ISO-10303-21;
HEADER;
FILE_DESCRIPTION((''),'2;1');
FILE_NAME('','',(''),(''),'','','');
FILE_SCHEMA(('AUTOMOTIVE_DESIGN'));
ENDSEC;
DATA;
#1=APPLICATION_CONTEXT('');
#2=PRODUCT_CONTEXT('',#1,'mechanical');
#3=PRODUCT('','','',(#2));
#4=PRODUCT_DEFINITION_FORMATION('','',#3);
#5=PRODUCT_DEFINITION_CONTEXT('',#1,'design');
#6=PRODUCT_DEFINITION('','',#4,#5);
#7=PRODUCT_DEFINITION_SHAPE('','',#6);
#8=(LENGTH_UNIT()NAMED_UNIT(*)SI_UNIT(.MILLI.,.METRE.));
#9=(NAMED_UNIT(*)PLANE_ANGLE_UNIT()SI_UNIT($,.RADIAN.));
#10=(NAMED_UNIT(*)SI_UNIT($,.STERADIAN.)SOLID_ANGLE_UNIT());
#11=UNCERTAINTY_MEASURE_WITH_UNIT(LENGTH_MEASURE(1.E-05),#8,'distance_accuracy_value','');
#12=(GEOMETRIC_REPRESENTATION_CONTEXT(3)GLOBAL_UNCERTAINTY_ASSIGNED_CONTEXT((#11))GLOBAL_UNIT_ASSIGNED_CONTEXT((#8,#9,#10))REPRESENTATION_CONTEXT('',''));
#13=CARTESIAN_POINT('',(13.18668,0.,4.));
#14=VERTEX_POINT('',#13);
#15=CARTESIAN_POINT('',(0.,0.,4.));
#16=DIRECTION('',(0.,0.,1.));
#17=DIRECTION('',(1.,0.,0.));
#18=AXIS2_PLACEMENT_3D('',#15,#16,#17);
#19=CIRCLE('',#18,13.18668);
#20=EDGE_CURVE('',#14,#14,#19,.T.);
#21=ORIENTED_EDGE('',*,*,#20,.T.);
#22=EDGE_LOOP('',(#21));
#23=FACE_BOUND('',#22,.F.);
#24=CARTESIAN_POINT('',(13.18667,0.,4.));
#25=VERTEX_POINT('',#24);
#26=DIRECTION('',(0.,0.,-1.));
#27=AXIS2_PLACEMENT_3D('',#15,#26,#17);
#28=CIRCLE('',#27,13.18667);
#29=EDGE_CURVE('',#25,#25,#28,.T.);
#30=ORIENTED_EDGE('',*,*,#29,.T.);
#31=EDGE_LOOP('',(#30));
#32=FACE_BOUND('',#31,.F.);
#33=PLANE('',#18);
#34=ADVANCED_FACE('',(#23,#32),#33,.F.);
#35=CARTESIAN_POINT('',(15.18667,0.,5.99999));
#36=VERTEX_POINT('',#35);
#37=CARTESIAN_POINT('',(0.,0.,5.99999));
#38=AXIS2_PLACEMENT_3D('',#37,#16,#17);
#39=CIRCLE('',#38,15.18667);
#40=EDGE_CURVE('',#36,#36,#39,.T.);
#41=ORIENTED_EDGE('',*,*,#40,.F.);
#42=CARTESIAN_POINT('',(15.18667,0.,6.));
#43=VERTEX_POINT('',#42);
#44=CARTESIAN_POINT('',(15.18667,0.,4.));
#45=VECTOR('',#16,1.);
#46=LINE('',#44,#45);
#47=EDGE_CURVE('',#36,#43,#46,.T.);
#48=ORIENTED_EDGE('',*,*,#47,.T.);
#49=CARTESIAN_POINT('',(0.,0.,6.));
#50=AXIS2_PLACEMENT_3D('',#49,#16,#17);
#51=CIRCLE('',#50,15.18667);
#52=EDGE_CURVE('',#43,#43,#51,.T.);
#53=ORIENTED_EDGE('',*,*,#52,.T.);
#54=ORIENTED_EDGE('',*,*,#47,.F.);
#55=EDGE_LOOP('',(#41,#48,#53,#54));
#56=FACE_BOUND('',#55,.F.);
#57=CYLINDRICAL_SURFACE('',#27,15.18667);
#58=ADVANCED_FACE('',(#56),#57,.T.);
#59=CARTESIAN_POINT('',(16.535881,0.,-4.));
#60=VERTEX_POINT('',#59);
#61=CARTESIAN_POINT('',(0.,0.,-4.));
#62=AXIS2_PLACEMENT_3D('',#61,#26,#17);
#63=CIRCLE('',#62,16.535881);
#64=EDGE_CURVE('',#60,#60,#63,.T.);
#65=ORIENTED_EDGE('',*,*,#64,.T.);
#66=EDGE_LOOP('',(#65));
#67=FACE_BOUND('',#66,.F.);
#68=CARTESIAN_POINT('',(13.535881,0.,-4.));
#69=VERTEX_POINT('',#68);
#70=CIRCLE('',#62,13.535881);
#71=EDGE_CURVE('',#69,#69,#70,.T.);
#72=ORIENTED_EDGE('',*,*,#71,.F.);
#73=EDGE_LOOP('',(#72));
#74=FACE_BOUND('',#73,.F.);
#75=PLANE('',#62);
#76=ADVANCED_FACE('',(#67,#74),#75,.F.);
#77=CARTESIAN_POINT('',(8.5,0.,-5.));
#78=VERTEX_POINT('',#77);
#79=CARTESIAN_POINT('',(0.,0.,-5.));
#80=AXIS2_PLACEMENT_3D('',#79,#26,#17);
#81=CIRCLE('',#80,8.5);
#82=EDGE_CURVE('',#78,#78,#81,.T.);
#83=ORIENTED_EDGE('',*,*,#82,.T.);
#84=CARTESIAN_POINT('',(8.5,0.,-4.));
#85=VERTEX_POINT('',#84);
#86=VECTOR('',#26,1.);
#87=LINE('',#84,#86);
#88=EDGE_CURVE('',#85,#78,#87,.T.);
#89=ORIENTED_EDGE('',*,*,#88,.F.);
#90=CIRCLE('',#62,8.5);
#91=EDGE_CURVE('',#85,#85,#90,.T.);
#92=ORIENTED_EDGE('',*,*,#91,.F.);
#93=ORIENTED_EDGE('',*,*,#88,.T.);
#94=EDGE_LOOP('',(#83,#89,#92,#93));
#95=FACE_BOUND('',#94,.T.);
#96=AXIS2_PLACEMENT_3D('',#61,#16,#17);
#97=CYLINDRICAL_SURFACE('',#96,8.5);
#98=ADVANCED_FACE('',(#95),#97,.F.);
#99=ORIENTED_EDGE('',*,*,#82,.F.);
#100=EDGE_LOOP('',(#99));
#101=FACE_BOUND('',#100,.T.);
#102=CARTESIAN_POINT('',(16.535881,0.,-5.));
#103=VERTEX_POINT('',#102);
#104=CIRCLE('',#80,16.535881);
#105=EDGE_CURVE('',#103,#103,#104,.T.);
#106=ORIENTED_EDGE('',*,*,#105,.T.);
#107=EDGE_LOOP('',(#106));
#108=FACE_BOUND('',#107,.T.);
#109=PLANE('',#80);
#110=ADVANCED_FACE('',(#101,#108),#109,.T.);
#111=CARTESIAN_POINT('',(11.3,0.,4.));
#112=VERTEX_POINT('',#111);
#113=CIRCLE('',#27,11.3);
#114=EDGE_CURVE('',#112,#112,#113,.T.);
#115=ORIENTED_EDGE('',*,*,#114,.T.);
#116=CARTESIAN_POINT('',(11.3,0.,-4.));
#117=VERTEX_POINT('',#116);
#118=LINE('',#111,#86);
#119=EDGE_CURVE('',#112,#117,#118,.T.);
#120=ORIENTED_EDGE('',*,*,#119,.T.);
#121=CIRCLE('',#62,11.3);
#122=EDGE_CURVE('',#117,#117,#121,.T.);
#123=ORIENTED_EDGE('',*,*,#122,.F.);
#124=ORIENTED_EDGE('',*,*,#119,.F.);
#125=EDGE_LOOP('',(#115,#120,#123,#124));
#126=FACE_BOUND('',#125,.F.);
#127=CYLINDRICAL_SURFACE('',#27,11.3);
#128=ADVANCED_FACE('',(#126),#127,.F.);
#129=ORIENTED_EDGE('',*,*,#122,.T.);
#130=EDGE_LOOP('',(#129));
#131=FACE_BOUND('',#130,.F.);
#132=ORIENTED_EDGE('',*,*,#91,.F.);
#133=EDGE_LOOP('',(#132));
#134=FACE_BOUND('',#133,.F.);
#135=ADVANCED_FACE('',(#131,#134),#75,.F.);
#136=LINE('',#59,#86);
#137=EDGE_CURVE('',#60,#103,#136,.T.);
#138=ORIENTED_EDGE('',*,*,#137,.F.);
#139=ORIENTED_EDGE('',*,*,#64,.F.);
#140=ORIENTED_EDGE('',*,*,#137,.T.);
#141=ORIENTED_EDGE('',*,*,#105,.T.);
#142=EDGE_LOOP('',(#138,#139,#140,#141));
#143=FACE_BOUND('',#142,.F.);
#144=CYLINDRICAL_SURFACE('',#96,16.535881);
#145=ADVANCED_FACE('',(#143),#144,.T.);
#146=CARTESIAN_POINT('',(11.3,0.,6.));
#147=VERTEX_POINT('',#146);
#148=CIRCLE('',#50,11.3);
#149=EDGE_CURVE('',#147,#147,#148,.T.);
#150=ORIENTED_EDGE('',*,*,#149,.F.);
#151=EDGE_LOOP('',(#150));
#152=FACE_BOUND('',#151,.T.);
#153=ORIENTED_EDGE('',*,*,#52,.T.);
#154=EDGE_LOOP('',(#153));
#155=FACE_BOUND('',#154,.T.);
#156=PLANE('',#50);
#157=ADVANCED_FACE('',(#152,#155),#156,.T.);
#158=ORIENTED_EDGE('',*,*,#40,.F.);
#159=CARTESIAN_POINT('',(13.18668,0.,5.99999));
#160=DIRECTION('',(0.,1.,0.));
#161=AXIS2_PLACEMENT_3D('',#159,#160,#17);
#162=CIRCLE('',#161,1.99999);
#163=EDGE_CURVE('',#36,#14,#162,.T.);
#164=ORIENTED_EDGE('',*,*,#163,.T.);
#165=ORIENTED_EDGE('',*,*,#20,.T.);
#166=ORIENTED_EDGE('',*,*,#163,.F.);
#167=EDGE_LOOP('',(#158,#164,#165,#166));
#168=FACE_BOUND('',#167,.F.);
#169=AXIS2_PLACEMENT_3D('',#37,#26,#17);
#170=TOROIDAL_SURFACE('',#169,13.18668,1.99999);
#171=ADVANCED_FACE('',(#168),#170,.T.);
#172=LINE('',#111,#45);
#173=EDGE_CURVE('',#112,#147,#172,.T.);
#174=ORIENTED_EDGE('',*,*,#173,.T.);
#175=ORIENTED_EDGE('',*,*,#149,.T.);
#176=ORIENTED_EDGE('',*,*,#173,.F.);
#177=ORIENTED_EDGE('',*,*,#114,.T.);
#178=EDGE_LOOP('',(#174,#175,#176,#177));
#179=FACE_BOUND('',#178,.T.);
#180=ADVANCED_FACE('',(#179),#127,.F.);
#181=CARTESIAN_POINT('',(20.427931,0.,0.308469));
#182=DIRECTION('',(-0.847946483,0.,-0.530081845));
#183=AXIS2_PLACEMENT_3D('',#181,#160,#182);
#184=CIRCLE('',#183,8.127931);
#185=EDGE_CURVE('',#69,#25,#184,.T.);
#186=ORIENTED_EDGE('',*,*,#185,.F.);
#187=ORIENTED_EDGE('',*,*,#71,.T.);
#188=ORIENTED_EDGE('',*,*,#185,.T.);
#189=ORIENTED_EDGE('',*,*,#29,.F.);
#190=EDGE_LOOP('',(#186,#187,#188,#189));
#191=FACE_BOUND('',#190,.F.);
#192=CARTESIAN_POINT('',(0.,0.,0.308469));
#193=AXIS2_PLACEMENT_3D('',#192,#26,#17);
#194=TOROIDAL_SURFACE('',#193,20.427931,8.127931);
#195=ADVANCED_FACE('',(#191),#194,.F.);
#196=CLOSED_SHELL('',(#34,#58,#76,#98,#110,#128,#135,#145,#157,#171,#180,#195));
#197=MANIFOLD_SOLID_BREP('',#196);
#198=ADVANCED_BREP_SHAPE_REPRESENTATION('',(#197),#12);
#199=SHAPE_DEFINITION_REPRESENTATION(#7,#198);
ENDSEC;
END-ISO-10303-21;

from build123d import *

# Parameters (mm, degrees)
F2_R     = 16.5358805208
F2_R_2   = 8.5
F3_DEPTH = 1
F4_R     = 15.1866700875
F4_R_2   = 11.3
F5_DEPTH = 2
F6_R     = 1.99999


# Not quite as in the source:
# - a fillet or chamfer is up to 0.001 mm smaller than in the source, because OpenCascade refuses the exact size


with BuildPart() as f1:
    # F0 (on Front) → F1 (revolve)
    with BuildSketch(Plane.XZ):
        with BuildLine():
            ThreePointArc((13.5358805208, -4), (12.3077325791, -0.0459885139), (13.1866700875, 4))
            Line((13.1866700875, 4), (11.3, 4))
            Line((11.3, 4), (11.3, -4))
            Line((11.3, -4), (13.5358805208, -4))
        make_face()
    revolve(axis=Axis((0, 0, -1.1675134301), (0, 0, -1)))

    # F2 (on face) → F3 (join)
    with BuildSketch(Plane(origin=(0, 0, -4), x_dir=(1, 0, 0), z_dir=(0, 0, -1))):
        Circle(F2_R)
        Circle(F2_R_2, mode=Mode.SUBTRACT)
    extrude(amount=F3_DEPTH)

    # F4 (on face) → F5 (join)
    with BuildSketch(Plane.XY.offset(4)):
        Circle(F4_R)
        Circle(F4_R_2, mode=Mode.SUBTRACT)
    extrude(amount=F5_DEPTH)

    # F6 (radius 2 in the source; OpenCascade refuses exactly that, so slightly less here)
    f6_edges = [f1.edges().sort_by_distance(p)[0] for p in [
        (-15.18667, 0, 4),
    ]]
    fillet(f6_edges, radius=F6_R)


solid = f1.part
